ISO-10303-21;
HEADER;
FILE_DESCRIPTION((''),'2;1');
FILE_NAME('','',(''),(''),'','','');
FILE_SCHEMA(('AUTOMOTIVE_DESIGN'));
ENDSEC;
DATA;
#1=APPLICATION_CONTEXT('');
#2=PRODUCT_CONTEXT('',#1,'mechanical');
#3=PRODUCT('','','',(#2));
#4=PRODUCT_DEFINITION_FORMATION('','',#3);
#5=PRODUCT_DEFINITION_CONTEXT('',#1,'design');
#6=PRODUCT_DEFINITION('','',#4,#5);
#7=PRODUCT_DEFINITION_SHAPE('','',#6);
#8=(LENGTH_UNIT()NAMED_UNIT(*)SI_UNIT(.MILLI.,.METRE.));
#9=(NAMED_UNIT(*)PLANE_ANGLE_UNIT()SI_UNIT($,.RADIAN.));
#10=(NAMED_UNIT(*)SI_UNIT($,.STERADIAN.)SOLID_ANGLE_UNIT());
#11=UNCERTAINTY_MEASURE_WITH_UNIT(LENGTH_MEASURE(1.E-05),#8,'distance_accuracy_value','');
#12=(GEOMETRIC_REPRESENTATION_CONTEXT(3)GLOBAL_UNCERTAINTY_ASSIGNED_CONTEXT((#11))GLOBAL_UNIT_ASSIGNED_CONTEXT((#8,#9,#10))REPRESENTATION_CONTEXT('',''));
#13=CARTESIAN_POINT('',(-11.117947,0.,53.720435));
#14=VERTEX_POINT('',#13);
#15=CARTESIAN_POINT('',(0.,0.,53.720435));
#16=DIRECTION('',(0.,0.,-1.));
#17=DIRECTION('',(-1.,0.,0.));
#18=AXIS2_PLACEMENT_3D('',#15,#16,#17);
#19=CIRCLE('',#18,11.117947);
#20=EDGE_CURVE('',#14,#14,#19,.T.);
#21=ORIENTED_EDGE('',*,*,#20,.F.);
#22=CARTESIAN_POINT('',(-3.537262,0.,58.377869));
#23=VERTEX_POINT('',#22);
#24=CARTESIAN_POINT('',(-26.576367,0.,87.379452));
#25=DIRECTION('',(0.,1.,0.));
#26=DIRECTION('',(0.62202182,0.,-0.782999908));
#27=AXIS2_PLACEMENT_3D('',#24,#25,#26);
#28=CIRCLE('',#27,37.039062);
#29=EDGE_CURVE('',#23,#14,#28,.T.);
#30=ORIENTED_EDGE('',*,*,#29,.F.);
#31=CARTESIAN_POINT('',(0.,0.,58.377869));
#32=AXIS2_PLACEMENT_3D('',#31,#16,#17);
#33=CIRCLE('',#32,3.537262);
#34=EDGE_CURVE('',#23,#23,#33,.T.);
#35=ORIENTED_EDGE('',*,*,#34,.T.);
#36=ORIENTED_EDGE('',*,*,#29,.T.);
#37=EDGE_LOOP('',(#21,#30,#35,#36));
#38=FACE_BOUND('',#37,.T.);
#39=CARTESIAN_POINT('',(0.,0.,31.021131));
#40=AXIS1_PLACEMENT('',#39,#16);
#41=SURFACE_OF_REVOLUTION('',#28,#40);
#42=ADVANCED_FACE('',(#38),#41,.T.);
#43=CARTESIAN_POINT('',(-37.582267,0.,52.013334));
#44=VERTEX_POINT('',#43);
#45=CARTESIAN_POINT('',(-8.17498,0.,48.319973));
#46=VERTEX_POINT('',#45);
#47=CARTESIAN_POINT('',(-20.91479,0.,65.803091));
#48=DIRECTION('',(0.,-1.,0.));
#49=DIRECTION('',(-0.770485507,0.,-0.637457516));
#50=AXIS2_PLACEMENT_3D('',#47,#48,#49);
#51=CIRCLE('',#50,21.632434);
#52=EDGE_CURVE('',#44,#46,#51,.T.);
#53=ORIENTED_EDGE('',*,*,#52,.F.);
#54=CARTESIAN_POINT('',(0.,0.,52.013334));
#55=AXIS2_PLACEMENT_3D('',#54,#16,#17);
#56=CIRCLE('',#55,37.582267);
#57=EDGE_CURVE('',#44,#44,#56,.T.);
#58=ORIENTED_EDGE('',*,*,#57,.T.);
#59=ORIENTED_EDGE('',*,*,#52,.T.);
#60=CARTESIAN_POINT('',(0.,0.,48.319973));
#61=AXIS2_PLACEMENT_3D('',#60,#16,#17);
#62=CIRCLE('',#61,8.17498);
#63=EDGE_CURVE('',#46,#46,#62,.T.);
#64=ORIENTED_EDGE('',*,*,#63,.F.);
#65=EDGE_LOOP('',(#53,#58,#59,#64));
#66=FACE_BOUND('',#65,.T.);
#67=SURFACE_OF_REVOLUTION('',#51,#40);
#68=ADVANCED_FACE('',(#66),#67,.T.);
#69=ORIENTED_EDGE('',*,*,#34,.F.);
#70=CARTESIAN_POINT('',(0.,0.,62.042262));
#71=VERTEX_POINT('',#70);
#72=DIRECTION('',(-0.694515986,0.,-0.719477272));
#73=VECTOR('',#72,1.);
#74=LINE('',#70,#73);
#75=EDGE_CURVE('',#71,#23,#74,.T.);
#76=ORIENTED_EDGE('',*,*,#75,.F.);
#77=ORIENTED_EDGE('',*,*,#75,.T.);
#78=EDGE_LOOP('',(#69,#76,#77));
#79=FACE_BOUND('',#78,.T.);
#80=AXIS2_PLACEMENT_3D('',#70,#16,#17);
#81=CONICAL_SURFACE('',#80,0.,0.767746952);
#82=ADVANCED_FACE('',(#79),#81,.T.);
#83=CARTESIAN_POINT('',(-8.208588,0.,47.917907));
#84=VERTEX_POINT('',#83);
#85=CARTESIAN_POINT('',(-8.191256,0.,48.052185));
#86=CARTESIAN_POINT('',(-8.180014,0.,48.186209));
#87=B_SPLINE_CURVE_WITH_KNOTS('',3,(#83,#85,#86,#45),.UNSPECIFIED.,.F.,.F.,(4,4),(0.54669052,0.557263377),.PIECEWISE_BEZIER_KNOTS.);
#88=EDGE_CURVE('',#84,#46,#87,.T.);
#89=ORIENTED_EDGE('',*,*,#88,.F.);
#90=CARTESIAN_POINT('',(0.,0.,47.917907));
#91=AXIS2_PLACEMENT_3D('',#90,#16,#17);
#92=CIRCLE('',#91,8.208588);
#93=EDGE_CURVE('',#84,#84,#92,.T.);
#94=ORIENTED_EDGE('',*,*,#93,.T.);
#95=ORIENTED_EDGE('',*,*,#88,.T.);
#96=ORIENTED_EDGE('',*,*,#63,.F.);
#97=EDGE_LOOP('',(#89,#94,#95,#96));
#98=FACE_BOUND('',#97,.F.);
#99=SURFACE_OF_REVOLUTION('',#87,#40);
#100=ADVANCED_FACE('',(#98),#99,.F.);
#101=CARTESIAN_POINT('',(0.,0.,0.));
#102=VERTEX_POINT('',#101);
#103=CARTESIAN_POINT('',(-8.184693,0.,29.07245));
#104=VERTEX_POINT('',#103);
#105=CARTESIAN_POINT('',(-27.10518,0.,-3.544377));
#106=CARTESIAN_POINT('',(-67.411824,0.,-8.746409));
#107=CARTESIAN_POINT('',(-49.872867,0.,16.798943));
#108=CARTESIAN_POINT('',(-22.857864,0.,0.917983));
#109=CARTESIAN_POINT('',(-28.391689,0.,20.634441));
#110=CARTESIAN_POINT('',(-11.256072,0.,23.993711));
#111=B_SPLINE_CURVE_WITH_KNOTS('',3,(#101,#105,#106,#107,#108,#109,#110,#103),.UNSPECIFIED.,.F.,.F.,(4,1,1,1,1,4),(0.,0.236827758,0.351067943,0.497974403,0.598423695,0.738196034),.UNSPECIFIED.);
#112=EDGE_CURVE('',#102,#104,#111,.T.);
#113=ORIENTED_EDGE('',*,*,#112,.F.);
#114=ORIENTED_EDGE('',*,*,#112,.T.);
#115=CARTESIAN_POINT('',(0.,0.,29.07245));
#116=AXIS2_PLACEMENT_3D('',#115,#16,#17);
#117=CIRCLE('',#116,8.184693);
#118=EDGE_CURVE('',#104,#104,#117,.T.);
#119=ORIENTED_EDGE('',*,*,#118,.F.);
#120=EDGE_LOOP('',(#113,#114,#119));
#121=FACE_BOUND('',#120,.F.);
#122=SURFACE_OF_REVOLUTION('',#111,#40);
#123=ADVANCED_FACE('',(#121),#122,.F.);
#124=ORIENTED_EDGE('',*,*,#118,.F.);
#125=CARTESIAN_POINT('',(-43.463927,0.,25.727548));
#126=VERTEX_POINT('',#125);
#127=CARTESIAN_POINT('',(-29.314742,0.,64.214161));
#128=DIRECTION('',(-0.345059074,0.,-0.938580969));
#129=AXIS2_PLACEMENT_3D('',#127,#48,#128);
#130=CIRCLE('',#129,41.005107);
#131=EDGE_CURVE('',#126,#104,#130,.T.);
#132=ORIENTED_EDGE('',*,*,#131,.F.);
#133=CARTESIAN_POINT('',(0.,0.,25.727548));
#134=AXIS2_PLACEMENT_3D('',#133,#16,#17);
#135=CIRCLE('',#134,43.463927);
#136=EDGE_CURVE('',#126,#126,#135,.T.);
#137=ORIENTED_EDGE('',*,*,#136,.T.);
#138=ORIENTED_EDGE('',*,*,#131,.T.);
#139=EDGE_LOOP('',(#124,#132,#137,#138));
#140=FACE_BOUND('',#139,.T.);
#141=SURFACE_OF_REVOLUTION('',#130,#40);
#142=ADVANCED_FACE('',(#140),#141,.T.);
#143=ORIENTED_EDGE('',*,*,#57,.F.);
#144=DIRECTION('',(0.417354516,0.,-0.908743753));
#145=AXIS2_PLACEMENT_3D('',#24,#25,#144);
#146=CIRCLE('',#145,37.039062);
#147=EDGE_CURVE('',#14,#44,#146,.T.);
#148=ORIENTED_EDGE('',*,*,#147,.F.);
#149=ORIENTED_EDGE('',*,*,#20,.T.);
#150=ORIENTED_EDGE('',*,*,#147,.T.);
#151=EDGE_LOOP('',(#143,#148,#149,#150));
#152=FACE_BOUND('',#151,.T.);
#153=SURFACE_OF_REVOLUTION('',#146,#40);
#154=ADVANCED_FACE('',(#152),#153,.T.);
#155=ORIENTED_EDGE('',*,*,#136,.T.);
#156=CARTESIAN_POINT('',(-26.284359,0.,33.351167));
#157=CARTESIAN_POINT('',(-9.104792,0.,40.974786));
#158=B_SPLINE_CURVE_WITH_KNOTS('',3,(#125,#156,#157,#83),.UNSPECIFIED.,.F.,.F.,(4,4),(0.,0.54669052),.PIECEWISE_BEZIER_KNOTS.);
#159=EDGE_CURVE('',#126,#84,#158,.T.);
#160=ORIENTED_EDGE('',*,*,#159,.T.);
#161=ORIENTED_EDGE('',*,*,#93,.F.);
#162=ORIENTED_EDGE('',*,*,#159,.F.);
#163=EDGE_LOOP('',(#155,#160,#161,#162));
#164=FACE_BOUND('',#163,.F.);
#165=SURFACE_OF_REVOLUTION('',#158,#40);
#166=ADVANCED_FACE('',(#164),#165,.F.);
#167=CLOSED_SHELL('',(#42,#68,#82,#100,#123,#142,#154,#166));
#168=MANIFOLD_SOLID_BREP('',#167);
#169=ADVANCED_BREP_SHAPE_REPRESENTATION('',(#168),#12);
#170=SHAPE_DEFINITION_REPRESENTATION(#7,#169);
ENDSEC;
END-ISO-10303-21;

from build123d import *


with BuildPart() as f1:
    # F0 (on Front) → F1 (revolve)
    with BuildSketch(Plane.XZ):
        with BuildLine():
            add(Edge.make_bspline(
                [(0, 0), (-27.1051796503, -3.5443767226), (-67.4118240794, -8.7464089236), (-49.8728671609, 16.7989430499), (-22.8578637898, 0.9179825568), (-28.3916894921, 20.6344411436), (-11.2560722754, 23.9937113533), (-8.1846928224, 29.0724504739)],
                knots=[0, 0, 0, 0, 0.2368277581, 0.3510679428, 0.4979744028, 0.598423695, 0.738196034, 0.738196034, 0.738196034, 0.738196034], degree=3))
            Line((0, 0), (0, 62.0422624052))
            add(Edge.make_bspline(
                [(-8.1749800593, 48.3199730515), (-7.6130940571, 54.0499571493), (-3.5372618136, 58.377869456), (0, 62.0422624052)],
                knots=[0.8751966709, 0.8751966709, 0.8751966709, 0.8751966709, 1, 1, 1, 1], degree=3))
            add(Edge.make_bspline(
                [(-8.2085881563, 47.9179068994), (-8.1912557961, 48.0521851147), (-8.1800138349, 48.1862088062), (-8.1749800593, 48.3199730515)],
                knots=[0.5466905196, 0.5466905196, 0.5466905196, 0.5466905196, 0.5572633766, 0.5572633766, 0.5572633766, 0.5572633766], degree=3))
            add(Edge.make_bspline(
                [(-8.1846928224, 29.0724504739), (-5.2380080285, 33.9449983201), (-8.6414514377, 41.6931773133), (-8.2085881563, 47.9179068994)],
                knots=[0.738196034, 0.738196034, 0.738196034, 0.738196034, 0.8722937683, 0.8722937683, 0.8722937683, 0.8722937683], degree=3))
        make_face()
        with BuildLine():
            ThreePointArc((-43.4639267623, 25.7275477052), (-25.4443143414, 23.392125218), (-8.1846928224, 29.0724504739))
            add(Edge.make_bspline(
                [(-8.1846928224, 29.0724504739), (-5.2380080285, 33.9449983201), (-8.6414514377, 41.6931773133), (-8.2085881563, 47.9179068994)],
                knots=[0.738196034, 0.738196034, 0.738196034, 0.738196034, 0.8722937683, 0.8722937683, 0.8722937683, 0.8722937683], degree=3))
            add(Edge.make_bspline(
                [(-43.4639267623, 25.7275477052), (-26.2843594738, 33.3511667014), (-9.1047921853, 40.9747856976), (-8.2085881563, 47.9179068994)],
                knots=[0, 0, 0, 0, 0.5466905196, 0.5466905196, 0.5466905196, 0.5466905196], degree=3))
        make_face()
        with BuildLine():
            add(Edge.make_bspline(
                [(-8.1749800593, 48.3199730515), (-7.6130940571, 54.0499571493), (-3.5372618136, 58.377869456), (0, 62.0422624052)],
                knots=[0.8751966709, 0.8751966709, 0.8751966709, 0.8751966709, 1, 1, 1, 1], degree=3))
            Line((0, 62.0422624052), (-3.5372618136, 58.377869456))
            ThreePointArc((-3.5372618136, 58.377869456), (-7.1872518267, 55.8207072548), (-11.1179468634, 53.7204353325))
            add(Edge.make_bspline(
                [(-8.1749800593, 48.3199730515), (-8.1055853029, 50.1640237146), (-9.2160500863, 51.958766885), (-11.1179468634, 53.7204353325)],
                knots=[0.5572633766, 0.5572633766, 0.5572633766, 0.5572633766, 0.703018947, 0.703018947, 0.703018947, 0.703018947], degree=3))
        make_face()
        with BuildLine():
            ThreePointArc((-37.5822670758, 52.0133338869), (-23.6105035116, 44.3392771213), (-8.1749800593, 48.3199730515))
            add(Edge.make_bspline(
                [(-8.1749800593, 48.3199730515), (-8.1055853029, 50.1640237146), (-9.2160500863, 51.958766885), (-11.1179468634, 53.7204353325)],
                knots=[0.5572633766, 0.5572633766, 0.5572633766, 0.5572633766, 0.703018947, 0.703018947, 0.703018947, 0.703018947], degree=3))
            ThreePointArc((-11.1179468634, 53.7204353325), (-24.1920887828, 50.4172095152), (-37.5822670758, 52.0133338869))
        make_face()
    revolve(axis=Axis((0, 0, 31.0211312026), (0, 0, -1)))


solid = f1.part
